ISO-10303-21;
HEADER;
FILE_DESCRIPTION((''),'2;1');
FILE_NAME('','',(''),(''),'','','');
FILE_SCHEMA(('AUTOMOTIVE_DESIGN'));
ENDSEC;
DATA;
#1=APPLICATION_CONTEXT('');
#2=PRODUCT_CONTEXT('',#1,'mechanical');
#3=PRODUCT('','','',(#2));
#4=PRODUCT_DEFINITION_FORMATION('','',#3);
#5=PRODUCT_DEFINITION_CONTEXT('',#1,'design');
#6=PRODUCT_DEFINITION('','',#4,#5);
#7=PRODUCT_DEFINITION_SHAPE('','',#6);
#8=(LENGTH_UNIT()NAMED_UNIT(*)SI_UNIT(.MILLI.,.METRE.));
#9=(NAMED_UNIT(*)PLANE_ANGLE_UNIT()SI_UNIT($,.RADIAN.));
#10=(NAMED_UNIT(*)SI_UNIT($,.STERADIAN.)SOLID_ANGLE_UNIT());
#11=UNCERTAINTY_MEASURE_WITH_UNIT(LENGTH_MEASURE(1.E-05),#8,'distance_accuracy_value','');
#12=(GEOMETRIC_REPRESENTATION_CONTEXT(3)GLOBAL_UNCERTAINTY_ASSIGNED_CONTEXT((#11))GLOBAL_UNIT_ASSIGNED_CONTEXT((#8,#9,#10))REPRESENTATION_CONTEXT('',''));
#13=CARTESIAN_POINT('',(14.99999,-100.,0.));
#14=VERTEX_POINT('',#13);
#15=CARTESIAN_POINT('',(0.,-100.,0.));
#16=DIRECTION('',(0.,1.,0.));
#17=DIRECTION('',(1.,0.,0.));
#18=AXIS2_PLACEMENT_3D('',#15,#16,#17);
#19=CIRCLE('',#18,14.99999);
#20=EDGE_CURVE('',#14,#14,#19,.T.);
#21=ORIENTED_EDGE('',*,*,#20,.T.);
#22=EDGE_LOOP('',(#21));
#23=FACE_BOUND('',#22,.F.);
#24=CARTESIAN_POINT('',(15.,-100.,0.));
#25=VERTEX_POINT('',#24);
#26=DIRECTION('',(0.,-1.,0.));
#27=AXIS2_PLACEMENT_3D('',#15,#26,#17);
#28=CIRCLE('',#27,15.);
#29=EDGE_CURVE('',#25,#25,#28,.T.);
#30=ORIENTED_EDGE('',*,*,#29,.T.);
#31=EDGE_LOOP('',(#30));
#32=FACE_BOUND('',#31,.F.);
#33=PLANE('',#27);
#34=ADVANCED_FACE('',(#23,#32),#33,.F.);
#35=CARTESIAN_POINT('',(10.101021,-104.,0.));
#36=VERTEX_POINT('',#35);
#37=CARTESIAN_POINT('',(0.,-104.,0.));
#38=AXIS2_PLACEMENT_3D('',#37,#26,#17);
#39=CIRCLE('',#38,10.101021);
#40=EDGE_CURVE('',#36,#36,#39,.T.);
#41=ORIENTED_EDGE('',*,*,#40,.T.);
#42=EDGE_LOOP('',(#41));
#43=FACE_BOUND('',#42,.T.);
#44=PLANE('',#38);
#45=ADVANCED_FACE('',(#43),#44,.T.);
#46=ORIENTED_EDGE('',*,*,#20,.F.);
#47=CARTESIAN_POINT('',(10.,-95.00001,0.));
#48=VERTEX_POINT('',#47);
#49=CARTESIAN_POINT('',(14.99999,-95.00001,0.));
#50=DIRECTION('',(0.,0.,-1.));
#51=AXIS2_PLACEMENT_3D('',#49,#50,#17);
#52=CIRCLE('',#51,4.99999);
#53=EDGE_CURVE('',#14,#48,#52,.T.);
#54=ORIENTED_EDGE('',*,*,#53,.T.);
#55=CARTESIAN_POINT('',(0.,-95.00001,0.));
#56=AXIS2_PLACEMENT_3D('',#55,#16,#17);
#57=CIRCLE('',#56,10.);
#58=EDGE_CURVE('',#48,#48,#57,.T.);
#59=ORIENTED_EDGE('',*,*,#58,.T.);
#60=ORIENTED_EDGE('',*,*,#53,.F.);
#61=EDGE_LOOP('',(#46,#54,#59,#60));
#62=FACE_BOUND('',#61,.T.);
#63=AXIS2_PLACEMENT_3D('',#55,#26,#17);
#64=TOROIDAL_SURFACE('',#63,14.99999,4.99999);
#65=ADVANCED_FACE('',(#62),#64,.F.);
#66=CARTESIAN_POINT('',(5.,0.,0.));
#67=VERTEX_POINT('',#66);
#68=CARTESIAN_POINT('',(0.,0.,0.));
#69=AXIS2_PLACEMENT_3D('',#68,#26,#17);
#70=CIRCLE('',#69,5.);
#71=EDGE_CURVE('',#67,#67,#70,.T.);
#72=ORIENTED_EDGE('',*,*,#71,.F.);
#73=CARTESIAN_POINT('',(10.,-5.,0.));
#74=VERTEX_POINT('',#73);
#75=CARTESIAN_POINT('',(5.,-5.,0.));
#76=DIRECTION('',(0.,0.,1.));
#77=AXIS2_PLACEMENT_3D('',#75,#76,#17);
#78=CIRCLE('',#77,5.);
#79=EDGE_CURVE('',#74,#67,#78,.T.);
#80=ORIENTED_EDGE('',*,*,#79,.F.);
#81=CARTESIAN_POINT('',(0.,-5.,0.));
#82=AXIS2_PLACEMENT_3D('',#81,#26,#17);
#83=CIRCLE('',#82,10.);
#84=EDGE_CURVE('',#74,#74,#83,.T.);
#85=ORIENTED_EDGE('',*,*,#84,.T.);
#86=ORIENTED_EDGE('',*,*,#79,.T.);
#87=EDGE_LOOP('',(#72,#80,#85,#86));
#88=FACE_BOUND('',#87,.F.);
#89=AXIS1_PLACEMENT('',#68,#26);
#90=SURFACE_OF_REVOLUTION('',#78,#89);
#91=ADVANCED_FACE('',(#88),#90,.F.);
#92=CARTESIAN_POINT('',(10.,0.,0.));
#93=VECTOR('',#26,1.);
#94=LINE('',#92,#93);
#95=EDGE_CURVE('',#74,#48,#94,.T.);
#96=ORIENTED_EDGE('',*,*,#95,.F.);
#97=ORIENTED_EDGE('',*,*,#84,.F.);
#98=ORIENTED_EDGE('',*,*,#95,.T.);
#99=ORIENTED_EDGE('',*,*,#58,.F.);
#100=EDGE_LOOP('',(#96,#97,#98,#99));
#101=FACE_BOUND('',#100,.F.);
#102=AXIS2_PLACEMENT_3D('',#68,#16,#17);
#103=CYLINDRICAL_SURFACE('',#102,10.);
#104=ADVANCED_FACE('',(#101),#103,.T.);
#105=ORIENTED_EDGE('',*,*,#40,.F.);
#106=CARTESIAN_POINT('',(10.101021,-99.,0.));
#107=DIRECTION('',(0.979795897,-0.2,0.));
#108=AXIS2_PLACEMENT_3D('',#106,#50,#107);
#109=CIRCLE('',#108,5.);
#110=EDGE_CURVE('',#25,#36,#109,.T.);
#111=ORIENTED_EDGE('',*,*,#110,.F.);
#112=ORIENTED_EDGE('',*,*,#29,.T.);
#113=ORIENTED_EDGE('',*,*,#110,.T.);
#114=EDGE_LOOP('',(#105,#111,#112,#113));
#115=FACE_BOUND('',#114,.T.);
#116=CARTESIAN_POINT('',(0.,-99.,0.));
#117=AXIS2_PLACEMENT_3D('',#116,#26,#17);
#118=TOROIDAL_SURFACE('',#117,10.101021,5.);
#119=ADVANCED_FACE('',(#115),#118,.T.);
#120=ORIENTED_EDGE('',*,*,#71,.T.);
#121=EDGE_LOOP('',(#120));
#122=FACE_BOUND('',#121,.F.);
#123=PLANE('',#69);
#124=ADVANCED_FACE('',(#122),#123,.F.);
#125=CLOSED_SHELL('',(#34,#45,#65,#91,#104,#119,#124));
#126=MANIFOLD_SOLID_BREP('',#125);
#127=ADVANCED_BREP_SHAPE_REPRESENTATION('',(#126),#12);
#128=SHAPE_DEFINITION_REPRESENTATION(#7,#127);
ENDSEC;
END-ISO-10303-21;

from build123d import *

# Parameters (mm, degrees)
F0_R     = 10
F1_DEPTH = 104
F2_R     = 15
F3_DEPTH = 4
F4_R     = 4.99999


# Not quite as in the source:
# - a fillet or chamfer that OpenCascade refuses, or shapes differently, is made with other operations: its cross-section is extruded or revolved along the edge and cut away or added
# - a fillet or chamfer is up to 0.001 mm smaller than in the source, because OpenCascade refuses the exact size


with BuildPart() as f1:
    # F0 (on Front) → F1 (new body)
    with BuildSketch(Plane.XZ):
        Circle(F0_R)
    extrude(amount=F1_DEPTH)

    # F2 (on face) → F3 (join)
    with BuildSketch(Plane.XZ.offset(104)):
        Circle(F2_R)
    extrude(amount=-F3_DEPTH)

    # F4 (radius 5 in the source; OpenCascade refuses exactly that, so slightly less here)
    f4_edges = [f1.edges().sort_by_distance(p)[0] for p in [
        (-10, -100, 0),
    ]]
    fillet(f4_edges, radius=F4_R)

    # F5: fillet of radius 5 on 2 edges, made by hand

    # F5_s1 → F5_t2 (revolve, cut)
    with BuildSketch(Plane.XY):
        with BuildLine():
            ThreePointArc((15, -100), (13.2632981746, -102.8729833462), (10.1010205144, -104))
            Line((10.1010205144, -104), (15, -104))
            Line((15, -104), (15, -100))
        make_face()
    revolve(axis=Axis((0, -104, 0), (0, -1, 0)), mode=Mode.SUBTRACT)

    # F5_s3 → F5_t4 (revolve, cut)
    with BuildSketch(Plane.XY):
        with BuildLine():
            ThreePointArc((10, -5), (8.5355339059, -1.4644660941), (5, 0))
            Line((5, 0), (10, 0))
            Line((10, 0), (10, -5))
        make_face()
    revolve(axis=Axis((0, 0, 0), (0, -1, 0)), mode=Mode.SUBTRACT)


solid = f1.part
